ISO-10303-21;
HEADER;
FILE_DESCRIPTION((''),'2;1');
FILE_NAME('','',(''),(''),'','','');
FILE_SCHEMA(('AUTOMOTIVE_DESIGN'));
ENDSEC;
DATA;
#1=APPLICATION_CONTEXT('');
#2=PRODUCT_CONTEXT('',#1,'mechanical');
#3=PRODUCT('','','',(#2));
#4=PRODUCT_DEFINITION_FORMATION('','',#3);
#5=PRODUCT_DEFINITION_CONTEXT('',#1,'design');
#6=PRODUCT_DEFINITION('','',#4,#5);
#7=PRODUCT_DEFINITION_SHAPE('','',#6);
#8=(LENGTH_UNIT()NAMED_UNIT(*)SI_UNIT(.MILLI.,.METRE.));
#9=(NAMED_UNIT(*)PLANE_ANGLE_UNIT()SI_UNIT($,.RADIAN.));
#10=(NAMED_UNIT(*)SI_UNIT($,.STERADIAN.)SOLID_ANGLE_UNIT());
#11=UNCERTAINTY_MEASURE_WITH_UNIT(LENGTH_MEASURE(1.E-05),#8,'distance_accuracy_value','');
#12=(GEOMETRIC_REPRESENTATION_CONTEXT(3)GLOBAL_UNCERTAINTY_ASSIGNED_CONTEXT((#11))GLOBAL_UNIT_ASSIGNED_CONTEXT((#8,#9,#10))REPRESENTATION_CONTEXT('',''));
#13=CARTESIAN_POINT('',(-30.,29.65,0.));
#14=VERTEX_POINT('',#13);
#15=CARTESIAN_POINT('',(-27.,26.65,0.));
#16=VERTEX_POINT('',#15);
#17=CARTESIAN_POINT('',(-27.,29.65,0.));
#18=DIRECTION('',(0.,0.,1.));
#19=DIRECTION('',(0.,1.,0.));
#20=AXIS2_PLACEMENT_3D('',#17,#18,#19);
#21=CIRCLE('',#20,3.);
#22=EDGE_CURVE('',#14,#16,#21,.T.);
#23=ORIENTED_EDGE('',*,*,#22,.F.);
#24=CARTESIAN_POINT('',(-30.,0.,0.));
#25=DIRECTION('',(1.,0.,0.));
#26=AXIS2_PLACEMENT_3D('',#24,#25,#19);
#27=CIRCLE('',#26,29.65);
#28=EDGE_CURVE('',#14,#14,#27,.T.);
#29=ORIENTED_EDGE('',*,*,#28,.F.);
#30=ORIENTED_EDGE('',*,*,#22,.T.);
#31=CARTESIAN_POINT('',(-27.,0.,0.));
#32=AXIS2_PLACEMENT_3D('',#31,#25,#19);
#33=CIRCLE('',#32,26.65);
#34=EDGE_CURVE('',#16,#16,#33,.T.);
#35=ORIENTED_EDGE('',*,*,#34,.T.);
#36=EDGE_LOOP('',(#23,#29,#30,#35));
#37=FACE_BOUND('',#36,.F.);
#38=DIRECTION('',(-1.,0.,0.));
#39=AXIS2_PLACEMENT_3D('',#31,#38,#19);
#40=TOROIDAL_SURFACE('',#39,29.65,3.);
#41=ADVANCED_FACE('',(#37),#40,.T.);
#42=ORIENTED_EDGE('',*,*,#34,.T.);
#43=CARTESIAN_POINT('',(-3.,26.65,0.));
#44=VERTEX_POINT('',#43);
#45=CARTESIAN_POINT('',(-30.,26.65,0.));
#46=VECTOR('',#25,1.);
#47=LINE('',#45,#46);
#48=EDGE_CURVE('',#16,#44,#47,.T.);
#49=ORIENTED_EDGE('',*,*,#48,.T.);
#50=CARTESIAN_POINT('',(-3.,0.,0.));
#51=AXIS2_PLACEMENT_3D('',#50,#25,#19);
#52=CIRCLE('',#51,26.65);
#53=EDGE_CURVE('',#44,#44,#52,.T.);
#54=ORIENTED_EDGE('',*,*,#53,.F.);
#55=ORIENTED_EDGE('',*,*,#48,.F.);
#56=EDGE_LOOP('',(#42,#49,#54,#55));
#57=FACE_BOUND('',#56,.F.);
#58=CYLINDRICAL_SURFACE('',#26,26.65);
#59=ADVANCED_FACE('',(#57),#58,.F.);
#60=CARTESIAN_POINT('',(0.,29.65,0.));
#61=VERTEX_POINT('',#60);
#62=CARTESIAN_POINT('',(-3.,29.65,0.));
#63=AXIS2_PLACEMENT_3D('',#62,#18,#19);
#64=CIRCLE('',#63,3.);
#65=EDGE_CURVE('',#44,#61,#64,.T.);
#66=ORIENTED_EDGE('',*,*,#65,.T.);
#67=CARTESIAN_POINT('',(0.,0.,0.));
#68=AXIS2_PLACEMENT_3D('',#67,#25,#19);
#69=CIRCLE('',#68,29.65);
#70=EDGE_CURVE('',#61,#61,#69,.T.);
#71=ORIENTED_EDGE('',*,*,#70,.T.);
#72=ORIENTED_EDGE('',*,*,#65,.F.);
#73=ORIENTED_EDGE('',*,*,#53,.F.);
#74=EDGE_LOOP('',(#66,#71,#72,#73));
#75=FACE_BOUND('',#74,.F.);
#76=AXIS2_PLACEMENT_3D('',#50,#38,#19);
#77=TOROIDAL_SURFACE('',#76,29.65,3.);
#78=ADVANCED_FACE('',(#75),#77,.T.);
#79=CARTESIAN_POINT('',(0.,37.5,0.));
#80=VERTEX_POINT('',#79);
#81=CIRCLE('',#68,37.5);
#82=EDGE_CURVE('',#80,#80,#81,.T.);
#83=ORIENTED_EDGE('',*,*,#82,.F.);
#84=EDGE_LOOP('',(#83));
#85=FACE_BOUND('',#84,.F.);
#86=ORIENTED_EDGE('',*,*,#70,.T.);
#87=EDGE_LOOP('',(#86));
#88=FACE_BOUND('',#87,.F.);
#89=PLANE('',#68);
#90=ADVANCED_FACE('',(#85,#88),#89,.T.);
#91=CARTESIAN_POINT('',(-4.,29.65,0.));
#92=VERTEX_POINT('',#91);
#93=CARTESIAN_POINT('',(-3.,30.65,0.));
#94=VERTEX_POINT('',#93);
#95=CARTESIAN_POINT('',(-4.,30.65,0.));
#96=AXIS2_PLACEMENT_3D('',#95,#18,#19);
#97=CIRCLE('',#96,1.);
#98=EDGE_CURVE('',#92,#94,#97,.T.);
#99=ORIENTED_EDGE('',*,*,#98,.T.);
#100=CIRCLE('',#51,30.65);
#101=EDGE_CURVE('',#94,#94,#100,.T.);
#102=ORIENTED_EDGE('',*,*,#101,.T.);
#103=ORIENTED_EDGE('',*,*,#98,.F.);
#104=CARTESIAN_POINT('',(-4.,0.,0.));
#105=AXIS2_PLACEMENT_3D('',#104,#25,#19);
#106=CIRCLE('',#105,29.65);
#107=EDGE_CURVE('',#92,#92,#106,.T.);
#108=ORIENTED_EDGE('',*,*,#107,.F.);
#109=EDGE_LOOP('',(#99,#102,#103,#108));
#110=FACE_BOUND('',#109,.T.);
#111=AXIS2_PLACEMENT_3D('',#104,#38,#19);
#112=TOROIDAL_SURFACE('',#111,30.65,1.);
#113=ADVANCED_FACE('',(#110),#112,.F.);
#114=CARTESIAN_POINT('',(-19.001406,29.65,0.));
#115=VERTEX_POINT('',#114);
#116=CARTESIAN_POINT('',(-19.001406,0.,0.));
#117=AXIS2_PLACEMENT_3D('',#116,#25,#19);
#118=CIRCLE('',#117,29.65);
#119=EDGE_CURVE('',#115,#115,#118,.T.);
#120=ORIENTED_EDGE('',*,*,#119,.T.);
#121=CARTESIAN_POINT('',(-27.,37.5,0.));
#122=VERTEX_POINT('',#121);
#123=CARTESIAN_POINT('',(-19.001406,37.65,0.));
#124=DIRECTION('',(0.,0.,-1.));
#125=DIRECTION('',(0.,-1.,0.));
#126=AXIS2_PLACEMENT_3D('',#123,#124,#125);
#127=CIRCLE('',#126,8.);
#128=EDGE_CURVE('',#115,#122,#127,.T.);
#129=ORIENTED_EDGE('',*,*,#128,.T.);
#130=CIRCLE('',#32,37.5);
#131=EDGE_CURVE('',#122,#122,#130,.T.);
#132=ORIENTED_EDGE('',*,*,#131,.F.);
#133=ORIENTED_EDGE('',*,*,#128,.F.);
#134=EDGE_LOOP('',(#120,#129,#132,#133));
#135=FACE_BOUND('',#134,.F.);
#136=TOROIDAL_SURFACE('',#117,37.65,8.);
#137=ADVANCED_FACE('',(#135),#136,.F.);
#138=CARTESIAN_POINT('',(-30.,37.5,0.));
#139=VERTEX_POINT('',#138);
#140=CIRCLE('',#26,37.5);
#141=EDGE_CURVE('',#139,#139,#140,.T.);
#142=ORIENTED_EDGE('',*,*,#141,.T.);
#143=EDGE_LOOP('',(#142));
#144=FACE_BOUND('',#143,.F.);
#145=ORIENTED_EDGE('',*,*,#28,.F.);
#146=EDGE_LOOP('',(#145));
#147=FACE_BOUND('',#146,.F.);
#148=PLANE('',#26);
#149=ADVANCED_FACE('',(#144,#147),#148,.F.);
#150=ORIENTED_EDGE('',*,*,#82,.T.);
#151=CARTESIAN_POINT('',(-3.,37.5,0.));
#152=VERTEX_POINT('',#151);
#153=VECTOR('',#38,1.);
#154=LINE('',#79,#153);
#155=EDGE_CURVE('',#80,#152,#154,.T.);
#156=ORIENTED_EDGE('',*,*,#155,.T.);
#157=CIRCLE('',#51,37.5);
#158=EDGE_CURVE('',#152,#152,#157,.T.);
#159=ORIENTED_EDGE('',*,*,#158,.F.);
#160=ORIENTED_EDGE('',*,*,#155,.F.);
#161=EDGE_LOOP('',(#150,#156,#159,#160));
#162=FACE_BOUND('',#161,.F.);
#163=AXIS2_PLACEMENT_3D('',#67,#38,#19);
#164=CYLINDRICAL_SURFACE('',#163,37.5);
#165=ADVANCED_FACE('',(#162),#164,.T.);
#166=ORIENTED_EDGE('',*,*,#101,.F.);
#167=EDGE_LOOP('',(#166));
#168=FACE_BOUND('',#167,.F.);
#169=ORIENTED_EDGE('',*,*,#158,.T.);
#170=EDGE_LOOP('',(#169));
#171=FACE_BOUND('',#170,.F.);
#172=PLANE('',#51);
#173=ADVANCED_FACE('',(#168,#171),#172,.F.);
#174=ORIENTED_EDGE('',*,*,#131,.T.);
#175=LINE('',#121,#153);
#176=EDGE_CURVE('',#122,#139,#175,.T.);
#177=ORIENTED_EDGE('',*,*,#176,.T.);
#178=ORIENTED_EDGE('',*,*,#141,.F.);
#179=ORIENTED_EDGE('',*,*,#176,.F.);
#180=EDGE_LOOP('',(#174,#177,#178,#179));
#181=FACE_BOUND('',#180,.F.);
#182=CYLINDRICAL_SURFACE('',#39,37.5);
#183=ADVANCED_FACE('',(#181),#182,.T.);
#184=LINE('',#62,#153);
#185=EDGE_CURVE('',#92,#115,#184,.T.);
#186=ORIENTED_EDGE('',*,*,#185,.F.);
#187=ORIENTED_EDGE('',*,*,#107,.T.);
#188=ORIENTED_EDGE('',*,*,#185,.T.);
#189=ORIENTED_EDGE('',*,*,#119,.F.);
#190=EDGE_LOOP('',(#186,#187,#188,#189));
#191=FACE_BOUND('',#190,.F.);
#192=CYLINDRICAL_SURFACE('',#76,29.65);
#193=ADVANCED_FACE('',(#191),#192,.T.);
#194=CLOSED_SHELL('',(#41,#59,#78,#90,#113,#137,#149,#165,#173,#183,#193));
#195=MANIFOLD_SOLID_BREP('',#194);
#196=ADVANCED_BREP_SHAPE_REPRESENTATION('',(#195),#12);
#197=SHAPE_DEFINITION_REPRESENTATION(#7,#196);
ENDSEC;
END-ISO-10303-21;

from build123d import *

# Parameters (mm, degrees)
F3_R = 3
F4_R = 1


# Not quite as in the source:
# - a fillet or chamfer that OpenCascade refuses, or shapes differently, is made with other operations: its cross-section is extruded or revolved along the edge and cut away or added


with BuildPart() as f1:
    # F0 (on Top) → F1 (revolve)
    with BuildSketch(Plane.XY):
        Polygon((-30, 26.65), (0, 26.65), (0, 37.5), (-3, 37.5), (-3, 29.65), (-27, 29.65), (-27, 37.5), (-30, 37.5), align=None)
    revolve(axis=Axis((5.0713585872, 0, 0), (1, 0, 0)))

    # F2: fillet of radius 8 on 1 edges, made by hand

    # F2_s1 → F2_t2 (revolve)
    with BuildSketch(Plane.XY):
        with BuildLine():
            ThreePointArc((-19.0014063736, 29.65), (-24.6049766641, 31.9403590306), (-27, 37.5))
            Line((-27, 37.5), (-27, 29.65))
            Line((-27, 29.65), (-19.0014063736, 29.65))
        make_face()
    revolve(axis=Axis((-27, 0, 0), (1, 0, 0)))

    # F3
    f3_edges = [f1.edges().sort_by_distance(p)[0] for p in [
        (0, -26.65, 0),
        (-30, -26.65, 0),
    ]]
    fillet(f3_edges, radius=F3_R)

    # F4
    f4_edges = [f1.edges().sort_by_distance(p)[0] for p in [
        (-3, -29.65, 0),
    ]]
    fillet(f4_edges, radius=F4_R)


solid = f1.part
